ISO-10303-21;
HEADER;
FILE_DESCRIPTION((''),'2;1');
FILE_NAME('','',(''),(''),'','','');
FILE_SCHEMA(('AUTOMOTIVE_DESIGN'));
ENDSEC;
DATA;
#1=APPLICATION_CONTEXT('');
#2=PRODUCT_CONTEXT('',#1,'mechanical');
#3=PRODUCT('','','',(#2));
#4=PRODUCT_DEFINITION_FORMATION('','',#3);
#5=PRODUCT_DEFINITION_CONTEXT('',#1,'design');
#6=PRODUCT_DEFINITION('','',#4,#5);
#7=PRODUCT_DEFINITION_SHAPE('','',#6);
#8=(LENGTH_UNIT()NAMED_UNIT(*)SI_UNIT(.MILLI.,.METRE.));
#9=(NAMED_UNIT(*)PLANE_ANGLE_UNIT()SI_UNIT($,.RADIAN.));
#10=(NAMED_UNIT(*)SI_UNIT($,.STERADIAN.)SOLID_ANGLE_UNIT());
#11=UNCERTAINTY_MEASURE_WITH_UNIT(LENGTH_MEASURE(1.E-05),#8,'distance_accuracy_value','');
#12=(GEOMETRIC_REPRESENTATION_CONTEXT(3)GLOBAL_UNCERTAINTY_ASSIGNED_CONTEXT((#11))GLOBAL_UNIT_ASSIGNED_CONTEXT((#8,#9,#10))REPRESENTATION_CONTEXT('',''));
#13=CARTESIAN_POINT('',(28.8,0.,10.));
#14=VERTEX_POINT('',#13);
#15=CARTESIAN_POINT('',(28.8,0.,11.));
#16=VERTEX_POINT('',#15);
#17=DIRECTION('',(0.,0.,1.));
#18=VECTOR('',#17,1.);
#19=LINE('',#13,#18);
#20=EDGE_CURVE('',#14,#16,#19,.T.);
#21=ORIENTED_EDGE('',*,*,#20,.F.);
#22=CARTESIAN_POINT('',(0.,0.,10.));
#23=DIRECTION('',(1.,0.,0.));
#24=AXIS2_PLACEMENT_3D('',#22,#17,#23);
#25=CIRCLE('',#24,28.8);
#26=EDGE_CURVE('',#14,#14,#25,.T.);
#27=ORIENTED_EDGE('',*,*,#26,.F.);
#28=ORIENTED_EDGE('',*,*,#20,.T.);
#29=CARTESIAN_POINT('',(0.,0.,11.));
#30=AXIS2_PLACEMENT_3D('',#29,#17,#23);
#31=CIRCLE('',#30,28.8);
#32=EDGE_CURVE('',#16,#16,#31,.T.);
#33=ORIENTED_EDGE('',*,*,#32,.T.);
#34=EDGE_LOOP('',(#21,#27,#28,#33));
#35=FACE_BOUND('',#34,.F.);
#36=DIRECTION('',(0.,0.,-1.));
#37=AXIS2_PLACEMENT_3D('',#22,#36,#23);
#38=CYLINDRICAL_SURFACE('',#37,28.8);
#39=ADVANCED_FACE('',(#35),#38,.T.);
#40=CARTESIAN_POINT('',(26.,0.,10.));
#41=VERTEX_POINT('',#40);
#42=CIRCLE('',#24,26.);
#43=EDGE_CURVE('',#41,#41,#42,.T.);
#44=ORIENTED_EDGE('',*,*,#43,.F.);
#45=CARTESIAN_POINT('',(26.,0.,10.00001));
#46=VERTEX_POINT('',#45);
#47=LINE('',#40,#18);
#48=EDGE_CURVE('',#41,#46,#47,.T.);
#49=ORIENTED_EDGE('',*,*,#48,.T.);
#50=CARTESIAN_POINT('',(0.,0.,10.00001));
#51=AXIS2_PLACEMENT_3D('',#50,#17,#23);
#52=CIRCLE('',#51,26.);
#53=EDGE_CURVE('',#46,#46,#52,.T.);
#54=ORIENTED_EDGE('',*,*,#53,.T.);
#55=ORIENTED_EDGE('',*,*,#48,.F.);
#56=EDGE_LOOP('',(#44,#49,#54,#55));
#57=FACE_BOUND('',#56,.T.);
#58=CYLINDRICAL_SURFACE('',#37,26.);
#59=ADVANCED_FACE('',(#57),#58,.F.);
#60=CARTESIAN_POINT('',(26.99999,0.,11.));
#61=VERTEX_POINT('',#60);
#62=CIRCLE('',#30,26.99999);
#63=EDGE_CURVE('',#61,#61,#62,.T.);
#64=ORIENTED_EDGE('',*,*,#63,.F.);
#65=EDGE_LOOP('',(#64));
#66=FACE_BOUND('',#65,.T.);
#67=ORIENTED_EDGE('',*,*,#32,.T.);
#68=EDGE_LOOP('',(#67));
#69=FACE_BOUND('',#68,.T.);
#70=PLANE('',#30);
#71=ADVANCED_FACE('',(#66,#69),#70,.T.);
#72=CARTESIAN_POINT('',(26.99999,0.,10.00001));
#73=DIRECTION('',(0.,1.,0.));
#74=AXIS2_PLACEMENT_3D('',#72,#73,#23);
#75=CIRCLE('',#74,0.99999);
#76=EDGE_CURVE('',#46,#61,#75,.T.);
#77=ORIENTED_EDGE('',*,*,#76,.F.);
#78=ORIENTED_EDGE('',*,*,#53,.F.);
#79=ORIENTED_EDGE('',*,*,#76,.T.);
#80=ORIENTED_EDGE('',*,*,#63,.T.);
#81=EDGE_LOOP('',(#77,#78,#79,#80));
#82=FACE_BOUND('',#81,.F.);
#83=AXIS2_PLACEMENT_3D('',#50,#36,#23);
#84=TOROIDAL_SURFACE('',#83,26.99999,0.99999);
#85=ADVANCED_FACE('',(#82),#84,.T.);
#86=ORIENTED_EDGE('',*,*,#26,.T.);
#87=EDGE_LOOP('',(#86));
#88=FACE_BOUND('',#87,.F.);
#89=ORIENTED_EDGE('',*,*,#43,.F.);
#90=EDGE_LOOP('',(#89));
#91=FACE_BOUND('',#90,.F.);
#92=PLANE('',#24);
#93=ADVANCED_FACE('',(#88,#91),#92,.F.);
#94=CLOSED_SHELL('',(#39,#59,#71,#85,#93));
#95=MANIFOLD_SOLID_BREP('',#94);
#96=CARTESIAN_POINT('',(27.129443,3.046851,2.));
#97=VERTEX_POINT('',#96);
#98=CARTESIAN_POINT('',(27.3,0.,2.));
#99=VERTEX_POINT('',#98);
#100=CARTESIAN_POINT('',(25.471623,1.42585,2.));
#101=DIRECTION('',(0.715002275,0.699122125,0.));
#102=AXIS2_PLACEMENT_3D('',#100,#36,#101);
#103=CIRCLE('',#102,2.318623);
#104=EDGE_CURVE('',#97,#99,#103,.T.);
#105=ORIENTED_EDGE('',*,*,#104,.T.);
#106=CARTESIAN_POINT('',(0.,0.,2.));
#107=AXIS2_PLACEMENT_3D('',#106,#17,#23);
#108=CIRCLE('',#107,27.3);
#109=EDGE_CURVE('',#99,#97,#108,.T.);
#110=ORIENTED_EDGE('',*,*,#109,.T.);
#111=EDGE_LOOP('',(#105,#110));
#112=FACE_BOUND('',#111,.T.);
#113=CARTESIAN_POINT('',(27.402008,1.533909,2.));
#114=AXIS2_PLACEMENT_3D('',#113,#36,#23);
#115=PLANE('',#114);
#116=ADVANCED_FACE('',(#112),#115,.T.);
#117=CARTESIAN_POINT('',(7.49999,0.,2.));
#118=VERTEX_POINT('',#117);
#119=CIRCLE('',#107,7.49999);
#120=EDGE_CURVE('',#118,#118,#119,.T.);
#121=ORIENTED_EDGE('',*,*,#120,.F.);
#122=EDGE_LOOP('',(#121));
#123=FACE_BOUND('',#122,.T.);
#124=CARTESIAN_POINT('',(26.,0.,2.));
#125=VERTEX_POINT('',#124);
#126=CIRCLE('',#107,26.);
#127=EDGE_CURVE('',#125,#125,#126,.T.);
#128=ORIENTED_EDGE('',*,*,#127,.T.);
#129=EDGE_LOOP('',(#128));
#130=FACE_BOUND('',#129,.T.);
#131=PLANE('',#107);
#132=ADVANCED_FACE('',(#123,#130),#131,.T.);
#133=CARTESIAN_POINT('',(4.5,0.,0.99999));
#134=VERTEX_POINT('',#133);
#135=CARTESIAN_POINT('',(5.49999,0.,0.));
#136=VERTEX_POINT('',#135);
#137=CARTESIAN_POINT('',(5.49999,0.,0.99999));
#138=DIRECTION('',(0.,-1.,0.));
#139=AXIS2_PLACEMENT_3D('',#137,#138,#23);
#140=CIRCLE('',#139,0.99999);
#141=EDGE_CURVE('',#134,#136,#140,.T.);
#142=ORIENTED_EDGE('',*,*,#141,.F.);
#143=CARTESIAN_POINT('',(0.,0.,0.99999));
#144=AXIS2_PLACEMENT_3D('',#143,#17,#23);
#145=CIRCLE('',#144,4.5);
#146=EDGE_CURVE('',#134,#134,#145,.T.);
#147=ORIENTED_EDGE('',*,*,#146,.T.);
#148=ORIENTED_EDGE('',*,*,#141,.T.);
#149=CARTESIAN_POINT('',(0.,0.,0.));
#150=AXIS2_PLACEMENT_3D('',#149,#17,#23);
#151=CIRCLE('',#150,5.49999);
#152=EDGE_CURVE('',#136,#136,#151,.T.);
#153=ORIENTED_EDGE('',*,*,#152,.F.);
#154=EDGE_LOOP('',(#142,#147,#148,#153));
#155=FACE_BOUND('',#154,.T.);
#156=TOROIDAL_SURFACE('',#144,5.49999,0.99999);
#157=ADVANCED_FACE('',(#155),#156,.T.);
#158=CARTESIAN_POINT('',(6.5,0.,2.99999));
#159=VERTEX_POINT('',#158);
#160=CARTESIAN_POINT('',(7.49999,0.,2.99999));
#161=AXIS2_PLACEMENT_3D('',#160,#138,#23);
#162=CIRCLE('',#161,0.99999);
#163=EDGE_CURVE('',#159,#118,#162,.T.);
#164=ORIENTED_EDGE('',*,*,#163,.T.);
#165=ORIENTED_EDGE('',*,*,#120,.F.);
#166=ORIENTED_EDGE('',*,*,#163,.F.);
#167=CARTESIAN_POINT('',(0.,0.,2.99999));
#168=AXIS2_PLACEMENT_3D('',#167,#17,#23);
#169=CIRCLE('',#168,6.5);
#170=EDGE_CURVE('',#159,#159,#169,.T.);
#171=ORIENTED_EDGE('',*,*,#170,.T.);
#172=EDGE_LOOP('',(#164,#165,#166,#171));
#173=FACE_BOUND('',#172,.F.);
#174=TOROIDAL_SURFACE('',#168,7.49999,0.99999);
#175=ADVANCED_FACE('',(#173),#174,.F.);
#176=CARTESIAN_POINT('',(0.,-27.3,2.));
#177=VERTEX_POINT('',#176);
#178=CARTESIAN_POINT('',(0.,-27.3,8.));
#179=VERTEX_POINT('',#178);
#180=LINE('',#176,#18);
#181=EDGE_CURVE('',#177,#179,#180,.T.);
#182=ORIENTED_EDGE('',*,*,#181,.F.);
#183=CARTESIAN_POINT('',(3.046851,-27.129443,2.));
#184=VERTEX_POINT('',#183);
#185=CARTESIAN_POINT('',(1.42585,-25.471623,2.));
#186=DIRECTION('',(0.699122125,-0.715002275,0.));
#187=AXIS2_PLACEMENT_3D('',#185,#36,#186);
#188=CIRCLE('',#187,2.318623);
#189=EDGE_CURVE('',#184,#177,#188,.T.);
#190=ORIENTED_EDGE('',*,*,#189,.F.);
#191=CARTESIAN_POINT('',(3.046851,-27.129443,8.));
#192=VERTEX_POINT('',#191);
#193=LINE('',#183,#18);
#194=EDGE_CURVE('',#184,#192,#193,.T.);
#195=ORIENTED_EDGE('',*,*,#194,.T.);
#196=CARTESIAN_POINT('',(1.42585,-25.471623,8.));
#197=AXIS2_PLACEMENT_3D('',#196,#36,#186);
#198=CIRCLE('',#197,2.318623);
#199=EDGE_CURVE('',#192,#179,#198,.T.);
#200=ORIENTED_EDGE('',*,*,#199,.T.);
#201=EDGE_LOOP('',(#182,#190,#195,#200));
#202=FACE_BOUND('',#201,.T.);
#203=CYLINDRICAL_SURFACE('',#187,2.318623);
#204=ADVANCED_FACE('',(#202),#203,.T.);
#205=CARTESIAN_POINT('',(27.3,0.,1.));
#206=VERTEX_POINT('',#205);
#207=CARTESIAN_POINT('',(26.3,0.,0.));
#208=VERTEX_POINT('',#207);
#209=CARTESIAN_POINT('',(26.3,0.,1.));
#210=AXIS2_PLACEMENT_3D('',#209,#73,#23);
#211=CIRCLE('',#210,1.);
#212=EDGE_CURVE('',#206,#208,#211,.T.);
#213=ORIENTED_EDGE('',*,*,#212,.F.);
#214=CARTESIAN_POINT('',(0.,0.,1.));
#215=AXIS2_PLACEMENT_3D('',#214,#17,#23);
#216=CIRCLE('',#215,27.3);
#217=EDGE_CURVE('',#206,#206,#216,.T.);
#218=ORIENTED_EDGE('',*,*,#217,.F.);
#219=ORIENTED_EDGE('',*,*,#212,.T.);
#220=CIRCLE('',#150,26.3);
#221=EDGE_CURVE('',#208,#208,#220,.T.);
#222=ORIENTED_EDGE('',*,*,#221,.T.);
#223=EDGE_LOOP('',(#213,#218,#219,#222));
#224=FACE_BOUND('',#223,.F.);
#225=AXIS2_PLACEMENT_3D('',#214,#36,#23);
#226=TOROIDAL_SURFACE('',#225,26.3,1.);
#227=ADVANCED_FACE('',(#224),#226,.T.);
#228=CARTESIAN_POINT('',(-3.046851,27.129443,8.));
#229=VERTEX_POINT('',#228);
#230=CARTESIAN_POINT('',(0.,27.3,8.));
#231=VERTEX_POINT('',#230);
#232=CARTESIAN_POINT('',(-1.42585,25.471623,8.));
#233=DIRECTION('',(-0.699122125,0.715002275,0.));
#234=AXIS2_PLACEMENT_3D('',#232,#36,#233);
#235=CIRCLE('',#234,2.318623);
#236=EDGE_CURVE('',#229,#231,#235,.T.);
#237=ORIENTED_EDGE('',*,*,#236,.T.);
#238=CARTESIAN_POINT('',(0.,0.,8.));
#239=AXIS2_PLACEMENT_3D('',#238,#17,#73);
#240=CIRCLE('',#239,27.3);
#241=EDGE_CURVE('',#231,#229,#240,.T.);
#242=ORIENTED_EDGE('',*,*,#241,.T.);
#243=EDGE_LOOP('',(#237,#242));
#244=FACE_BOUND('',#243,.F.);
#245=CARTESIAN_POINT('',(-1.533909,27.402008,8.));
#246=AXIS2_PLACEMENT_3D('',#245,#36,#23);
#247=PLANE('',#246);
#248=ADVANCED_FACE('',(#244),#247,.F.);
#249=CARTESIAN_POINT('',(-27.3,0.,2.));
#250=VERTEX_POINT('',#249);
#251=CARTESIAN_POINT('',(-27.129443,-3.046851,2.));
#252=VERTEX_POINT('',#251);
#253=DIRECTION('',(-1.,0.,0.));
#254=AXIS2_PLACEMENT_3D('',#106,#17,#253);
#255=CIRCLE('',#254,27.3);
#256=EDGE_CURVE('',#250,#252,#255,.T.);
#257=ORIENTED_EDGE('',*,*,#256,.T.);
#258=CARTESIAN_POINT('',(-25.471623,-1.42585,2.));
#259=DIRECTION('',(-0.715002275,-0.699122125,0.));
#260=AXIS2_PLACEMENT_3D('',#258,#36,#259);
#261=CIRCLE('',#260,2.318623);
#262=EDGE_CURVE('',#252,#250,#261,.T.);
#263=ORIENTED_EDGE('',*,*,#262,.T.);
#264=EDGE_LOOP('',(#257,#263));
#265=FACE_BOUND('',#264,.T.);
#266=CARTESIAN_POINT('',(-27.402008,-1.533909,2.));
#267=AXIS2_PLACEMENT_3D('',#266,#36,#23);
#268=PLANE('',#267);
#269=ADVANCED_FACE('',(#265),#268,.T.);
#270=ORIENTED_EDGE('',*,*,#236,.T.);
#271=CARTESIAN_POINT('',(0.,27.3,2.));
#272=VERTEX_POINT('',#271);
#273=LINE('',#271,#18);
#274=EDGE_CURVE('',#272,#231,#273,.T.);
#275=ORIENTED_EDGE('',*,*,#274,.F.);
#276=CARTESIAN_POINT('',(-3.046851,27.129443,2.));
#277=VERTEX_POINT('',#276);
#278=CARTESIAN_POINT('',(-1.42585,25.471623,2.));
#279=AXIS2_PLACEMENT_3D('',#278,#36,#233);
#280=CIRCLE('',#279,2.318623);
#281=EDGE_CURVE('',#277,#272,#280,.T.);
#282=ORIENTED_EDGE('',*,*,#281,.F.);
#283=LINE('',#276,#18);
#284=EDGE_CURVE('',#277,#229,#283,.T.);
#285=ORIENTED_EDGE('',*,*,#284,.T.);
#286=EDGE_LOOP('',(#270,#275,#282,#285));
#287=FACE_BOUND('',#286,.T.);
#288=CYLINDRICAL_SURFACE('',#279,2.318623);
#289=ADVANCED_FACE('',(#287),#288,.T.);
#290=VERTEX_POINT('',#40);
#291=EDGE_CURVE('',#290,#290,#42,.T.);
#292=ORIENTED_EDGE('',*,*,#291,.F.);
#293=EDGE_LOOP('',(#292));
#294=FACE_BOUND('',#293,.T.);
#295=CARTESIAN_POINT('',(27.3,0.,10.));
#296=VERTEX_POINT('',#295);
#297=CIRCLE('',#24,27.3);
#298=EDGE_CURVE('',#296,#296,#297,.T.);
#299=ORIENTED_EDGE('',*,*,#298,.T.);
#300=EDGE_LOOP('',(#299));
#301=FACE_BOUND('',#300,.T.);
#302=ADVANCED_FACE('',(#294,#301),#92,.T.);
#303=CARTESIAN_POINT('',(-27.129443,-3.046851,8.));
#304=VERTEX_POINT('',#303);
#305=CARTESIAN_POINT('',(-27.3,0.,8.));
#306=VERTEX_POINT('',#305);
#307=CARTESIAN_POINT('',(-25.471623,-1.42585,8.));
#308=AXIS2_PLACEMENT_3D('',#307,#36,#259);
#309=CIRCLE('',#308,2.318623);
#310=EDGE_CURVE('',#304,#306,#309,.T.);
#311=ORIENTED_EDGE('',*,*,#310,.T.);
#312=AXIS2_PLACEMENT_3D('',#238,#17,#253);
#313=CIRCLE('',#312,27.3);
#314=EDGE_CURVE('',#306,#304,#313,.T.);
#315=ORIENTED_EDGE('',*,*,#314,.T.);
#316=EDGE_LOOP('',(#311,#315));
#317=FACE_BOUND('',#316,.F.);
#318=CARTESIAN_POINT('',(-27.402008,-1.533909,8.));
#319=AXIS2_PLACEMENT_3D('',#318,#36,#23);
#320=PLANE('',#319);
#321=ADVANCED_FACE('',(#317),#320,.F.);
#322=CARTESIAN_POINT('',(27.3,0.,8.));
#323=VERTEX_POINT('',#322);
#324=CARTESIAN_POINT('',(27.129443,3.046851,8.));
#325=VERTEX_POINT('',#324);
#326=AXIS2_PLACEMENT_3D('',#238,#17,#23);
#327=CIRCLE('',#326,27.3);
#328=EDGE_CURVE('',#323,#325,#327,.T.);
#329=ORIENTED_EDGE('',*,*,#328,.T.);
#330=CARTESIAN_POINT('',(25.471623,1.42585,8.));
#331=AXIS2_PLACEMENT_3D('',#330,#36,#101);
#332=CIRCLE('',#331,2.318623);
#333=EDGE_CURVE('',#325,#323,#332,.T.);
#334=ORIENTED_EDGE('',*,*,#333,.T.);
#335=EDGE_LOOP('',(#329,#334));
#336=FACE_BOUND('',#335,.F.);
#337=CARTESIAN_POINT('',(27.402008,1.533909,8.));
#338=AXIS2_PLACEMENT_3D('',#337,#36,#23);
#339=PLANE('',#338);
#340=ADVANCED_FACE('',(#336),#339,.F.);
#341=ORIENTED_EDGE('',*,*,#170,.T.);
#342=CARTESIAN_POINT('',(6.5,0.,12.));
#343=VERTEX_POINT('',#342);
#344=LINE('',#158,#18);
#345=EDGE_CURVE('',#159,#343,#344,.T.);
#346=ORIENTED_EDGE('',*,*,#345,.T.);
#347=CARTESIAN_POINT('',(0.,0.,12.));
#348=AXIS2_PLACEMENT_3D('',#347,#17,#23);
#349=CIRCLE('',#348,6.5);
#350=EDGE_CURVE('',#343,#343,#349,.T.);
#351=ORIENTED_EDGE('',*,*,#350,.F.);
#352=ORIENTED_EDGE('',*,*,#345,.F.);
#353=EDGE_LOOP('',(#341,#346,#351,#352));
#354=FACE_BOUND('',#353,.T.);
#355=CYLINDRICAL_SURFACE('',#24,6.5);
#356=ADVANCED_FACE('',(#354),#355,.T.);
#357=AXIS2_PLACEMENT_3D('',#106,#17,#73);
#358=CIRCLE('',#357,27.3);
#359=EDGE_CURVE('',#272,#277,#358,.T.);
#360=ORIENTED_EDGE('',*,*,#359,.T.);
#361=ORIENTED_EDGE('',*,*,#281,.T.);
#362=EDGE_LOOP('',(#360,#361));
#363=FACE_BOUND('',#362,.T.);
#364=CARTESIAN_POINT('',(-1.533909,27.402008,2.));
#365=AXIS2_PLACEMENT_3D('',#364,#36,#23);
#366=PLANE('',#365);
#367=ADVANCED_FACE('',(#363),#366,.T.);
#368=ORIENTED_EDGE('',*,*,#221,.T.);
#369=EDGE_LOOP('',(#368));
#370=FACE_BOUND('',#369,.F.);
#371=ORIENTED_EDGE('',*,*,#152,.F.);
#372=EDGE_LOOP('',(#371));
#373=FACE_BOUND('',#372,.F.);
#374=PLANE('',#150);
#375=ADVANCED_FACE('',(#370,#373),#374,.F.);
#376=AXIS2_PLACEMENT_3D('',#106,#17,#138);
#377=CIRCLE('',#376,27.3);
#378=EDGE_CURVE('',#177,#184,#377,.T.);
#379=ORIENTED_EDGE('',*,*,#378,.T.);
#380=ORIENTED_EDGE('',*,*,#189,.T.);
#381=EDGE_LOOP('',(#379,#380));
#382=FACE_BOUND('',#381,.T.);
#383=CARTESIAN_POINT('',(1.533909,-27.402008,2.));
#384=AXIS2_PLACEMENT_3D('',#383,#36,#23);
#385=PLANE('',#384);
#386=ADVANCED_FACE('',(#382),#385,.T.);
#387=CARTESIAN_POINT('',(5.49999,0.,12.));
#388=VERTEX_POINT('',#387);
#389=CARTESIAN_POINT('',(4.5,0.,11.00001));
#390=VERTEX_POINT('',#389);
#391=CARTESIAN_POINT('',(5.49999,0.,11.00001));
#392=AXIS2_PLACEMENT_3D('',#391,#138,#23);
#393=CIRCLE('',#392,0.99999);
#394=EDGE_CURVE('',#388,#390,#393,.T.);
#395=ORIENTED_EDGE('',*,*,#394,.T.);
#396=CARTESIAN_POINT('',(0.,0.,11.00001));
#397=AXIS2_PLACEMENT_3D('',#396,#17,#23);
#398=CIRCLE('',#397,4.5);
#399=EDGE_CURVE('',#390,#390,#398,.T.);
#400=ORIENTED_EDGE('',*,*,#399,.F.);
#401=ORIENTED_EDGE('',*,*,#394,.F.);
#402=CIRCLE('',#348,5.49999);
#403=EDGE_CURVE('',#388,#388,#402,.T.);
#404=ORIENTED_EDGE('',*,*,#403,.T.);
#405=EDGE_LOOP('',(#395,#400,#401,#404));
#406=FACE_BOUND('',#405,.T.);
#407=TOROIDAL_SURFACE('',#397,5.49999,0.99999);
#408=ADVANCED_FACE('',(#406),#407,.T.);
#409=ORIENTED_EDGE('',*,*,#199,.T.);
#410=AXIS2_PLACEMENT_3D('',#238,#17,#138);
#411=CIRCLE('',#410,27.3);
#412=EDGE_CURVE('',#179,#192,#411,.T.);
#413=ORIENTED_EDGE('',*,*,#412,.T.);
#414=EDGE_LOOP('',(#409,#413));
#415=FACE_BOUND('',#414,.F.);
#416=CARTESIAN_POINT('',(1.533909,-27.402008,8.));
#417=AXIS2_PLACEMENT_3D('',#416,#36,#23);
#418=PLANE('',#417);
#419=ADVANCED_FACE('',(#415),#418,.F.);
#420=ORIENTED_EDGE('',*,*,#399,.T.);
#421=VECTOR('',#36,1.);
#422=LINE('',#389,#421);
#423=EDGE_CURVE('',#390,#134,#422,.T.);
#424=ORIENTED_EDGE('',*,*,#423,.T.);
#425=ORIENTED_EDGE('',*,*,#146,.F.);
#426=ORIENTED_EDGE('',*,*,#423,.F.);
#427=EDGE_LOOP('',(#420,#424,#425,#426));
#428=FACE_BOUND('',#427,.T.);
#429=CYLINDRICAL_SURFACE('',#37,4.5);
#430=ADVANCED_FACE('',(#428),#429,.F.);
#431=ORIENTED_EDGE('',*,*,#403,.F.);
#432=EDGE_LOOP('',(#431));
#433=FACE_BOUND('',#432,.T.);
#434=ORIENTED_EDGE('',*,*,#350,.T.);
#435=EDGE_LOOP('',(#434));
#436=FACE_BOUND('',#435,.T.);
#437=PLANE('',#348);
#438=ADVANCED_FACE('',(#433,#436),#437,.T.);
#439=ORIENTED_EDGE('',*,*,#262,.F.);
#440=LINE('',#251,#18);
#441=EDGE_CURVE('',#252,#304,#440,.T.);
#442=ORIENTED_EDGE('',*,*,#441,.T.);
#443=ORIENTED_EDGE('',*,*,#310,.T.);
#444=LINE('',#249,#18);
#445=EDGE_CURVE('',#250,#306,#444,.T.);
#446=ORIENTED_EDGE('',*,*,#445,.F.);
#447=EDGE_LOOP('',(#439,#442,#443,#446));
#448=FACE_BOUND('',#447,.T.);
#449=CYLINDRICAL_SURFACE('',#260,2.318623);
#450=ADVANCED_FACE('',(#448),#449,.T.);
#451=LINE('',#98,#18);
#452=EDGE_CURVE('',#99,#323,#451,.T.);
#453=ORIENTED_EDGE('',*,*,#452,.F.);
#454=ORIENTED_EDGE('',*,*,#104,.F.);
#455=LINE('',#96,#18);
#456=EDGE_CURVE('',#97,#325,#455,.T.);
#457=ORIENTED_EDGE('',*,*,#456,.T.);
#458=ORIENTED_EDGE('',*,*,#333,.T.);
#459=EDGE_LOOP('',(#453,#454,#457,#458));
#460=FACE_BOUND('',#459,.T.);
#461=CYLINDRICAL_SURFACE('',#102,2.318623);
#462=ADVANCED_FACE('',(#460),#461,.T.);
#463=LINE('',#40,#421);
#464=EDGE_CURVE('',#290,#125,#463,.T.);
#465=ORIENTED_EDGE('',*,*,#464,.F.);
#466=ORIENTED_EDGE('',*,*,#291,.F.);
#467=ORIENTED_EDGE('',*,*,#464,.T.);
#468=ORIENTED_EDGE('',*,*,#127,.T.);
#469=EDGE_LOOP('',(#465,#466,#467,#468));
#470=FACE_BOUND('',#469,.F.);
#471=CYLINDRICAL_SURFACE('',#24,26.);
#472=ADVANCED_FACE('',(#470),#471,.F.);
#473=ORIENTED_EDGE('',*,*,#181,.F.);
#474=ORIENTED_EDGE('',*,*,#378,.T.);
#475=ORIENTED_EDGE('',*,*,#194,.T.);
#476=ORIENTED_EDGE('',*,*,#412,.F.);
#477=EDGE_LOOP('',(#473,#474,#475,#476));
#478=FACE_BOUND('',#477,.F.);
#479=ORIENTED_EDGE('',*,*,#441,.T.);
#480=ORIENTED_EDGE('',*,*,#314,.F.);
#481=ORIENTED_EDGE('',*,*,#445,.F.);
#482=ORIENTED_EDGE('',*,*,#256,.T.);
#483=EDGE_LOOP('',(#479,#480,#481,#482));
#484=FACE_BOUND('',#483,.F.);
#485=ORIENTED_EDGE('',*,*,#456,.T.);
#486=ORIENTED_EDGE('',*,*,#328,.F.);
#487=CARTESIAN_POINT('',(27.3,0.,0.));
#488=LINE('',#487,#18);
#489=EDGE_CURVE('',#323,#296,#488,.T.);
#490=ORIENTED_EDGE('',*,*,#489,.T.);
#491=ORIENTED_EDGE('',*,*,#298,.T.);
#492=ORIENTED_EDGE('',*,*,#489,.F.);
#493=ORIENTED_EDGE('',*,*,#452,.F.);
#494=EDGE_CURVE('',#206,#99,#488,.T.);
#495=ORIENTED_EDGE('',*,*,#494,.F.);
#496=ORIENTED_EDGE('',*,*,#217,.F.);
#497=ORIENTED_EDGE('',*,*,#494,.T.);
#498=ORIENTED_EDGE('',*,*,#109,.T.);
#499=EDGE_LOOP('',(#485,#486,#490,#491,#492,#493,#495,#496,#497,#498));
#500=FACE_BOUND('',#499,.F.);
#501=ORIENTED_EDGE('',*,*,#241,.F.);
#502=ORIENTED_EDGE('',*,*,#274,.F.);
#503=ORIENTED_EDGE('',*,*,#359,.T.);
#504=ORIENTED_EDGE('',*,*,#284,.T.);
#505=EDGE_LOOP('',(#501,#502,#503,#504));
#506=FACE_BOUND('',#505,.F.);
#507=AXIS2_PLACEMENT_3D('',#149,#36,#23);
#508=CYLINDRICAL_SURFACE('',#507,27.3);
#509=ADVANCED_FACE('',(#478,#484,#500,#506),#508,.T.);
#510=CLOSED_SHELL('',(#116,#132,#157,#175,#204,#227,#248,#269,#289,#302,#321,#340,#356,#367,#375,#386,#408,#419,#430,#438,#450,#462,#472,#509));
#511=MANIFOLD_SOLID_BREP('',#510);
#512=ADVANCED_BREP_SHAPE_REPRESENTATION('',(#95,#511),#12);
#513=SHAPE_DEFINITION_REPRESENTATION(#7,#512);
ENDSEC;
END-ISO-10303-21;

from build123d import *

# Parameters (mm, degrees)
F0_R      = 27.3
F0_R_2    = 4.5
F1_DEPTH  = 10
F2_R      = 26
F2_R_2    = 6.5
F3_DEPTH  = 8
F4_R      = 28.8
F4_R_2    = 27.3
F4_R_3    = 26
F5_DEPTH  = 1
F6_R      = 6.5
F6_R_2    = 4.5
F7_DEPTH  = 2
F8_R      = 0.99999
F8_2_R    = 0.99999
F10_START = -2
F10_DEPTH = 6
F11_R     = 1


# Not quite as in the source:
# - a fillet or chamfer is up to 0.001 mm smaller than in the source, because OpenCascade refuses the exact size


with BuildPart() as f1:
    # F0 (on Top) → F1 (new body)
    with BuildSketch(Plane.XY):
        Circle(F0_R)
        Circle(F0_R_2, mode=Mode.SUBTRACT)
    extrude(amount=F1_DEPTH)

    # F2 (on face) → F3 (cut)
    with BuildSketch(Plane.XY.offset(10)):
        Circle(F2_R)
        Circle(F2_R_2, mode=Mode.SUBTRACT)
    extrude(amount=-F3_DEPTH, mode=Mode.SUBTRACT)

    # F6 (on face) → F7 (join)
    with BuildSketch(Plane.XY.offset(10)):
        Circle(F6_R)
        Circle(F6_R_2, mode=Mode.SUBTRACT)
    extrude(amount=F7_DEPTH)

    # F8 (radius 1 in the source; OpenCascade refuses exactly that, so slightly less here)
    f8_edges = [f1.edges().sort_by_distance(p)[0] for p in [
        (-4.5, 0, 0),
        (-4.5, 0, 12),
        (-6.5, 0, 2),
    ]]
    fillet(f8_edges, radius=F8_R)

    # F9 (on face) → F10 (join)
    with BuildSketch(Plane(origin=(0, 0, 0), x_dir=(1, 0, 0), z_dir=(0, 0, -1)).offset(F10_START)):
        with BuildLine():
            ThreePointArc((27.1294434502, -3.0468505187), (27.7866214105, -1.5554390509), (27.3, 0))
            ThreePointArc((27.3, 0), (27.257327512, -1.5258102454), (27.1294434502, -3.0468505187))
        make_face()
        with BuildLine():
            ThreePointArc((-27.3, 0), (-27.257327512, 1.5258102454), (-27.1294434502, 3.0468505187))
            ThreePointArc((-27.1294434502, 3.0468505187), (-27.7866214105, 1.5554390509), (-27.3, 0))
        make_face()
        with BuildLine():
            ThreePointArc((3.0468505187, 27.1294434502), (1.5554390509, 27.7866214105), (0, 27.3))
            ThreePointArc((0, 27.3), (1.5258102454, 27.257327512), (3.0468505187, 27.1294434502))
        make_face()
        with BuildLine():
            ThreePointArc((0, -27.3), (-1.5258102454, -27.257327512), (-3.0468505187, -27.1294434502))
            ThreePointArc((-3.0468505187, -27.1294434502), (-1.5554390509, -27.7866214105), (0, -27.3))
        make_face()
    extrude(amount=-F10_DEPTH)

    # F11
    f11_edges = [f1.edges().sort_by_distance(p)[0] for p in [
        (-27.3, 0, 0),
    ]]
    fillet(f11_edges, radius=F11_R)


with BuildPart() as f5:
    # F4 (on face) → F5 (new body)
    with BuildSketch(Plane.XY.offset(10)):
        Circle(F4_R)
        Circle(F4_R_2, mode=Mode.SUBTRACT)
        Circle(F4_R_2)
        Circle(F4_R_3, mode=Mode.SUBTRACT)
    extrude(amount=F5_DEPTH)

    # F8#2 (radius 1 in the source; OpenCascade refuses exactly that, so slightly less here)
    f8_2_edges = [f5.edges().sort_by_distance(p)[0] for p in [
        (-26, 0, 11),
    ]]
    fillet(f8_2_edges, radius=F8_2_R)


solid = Compound([f1.part, f5.part])
